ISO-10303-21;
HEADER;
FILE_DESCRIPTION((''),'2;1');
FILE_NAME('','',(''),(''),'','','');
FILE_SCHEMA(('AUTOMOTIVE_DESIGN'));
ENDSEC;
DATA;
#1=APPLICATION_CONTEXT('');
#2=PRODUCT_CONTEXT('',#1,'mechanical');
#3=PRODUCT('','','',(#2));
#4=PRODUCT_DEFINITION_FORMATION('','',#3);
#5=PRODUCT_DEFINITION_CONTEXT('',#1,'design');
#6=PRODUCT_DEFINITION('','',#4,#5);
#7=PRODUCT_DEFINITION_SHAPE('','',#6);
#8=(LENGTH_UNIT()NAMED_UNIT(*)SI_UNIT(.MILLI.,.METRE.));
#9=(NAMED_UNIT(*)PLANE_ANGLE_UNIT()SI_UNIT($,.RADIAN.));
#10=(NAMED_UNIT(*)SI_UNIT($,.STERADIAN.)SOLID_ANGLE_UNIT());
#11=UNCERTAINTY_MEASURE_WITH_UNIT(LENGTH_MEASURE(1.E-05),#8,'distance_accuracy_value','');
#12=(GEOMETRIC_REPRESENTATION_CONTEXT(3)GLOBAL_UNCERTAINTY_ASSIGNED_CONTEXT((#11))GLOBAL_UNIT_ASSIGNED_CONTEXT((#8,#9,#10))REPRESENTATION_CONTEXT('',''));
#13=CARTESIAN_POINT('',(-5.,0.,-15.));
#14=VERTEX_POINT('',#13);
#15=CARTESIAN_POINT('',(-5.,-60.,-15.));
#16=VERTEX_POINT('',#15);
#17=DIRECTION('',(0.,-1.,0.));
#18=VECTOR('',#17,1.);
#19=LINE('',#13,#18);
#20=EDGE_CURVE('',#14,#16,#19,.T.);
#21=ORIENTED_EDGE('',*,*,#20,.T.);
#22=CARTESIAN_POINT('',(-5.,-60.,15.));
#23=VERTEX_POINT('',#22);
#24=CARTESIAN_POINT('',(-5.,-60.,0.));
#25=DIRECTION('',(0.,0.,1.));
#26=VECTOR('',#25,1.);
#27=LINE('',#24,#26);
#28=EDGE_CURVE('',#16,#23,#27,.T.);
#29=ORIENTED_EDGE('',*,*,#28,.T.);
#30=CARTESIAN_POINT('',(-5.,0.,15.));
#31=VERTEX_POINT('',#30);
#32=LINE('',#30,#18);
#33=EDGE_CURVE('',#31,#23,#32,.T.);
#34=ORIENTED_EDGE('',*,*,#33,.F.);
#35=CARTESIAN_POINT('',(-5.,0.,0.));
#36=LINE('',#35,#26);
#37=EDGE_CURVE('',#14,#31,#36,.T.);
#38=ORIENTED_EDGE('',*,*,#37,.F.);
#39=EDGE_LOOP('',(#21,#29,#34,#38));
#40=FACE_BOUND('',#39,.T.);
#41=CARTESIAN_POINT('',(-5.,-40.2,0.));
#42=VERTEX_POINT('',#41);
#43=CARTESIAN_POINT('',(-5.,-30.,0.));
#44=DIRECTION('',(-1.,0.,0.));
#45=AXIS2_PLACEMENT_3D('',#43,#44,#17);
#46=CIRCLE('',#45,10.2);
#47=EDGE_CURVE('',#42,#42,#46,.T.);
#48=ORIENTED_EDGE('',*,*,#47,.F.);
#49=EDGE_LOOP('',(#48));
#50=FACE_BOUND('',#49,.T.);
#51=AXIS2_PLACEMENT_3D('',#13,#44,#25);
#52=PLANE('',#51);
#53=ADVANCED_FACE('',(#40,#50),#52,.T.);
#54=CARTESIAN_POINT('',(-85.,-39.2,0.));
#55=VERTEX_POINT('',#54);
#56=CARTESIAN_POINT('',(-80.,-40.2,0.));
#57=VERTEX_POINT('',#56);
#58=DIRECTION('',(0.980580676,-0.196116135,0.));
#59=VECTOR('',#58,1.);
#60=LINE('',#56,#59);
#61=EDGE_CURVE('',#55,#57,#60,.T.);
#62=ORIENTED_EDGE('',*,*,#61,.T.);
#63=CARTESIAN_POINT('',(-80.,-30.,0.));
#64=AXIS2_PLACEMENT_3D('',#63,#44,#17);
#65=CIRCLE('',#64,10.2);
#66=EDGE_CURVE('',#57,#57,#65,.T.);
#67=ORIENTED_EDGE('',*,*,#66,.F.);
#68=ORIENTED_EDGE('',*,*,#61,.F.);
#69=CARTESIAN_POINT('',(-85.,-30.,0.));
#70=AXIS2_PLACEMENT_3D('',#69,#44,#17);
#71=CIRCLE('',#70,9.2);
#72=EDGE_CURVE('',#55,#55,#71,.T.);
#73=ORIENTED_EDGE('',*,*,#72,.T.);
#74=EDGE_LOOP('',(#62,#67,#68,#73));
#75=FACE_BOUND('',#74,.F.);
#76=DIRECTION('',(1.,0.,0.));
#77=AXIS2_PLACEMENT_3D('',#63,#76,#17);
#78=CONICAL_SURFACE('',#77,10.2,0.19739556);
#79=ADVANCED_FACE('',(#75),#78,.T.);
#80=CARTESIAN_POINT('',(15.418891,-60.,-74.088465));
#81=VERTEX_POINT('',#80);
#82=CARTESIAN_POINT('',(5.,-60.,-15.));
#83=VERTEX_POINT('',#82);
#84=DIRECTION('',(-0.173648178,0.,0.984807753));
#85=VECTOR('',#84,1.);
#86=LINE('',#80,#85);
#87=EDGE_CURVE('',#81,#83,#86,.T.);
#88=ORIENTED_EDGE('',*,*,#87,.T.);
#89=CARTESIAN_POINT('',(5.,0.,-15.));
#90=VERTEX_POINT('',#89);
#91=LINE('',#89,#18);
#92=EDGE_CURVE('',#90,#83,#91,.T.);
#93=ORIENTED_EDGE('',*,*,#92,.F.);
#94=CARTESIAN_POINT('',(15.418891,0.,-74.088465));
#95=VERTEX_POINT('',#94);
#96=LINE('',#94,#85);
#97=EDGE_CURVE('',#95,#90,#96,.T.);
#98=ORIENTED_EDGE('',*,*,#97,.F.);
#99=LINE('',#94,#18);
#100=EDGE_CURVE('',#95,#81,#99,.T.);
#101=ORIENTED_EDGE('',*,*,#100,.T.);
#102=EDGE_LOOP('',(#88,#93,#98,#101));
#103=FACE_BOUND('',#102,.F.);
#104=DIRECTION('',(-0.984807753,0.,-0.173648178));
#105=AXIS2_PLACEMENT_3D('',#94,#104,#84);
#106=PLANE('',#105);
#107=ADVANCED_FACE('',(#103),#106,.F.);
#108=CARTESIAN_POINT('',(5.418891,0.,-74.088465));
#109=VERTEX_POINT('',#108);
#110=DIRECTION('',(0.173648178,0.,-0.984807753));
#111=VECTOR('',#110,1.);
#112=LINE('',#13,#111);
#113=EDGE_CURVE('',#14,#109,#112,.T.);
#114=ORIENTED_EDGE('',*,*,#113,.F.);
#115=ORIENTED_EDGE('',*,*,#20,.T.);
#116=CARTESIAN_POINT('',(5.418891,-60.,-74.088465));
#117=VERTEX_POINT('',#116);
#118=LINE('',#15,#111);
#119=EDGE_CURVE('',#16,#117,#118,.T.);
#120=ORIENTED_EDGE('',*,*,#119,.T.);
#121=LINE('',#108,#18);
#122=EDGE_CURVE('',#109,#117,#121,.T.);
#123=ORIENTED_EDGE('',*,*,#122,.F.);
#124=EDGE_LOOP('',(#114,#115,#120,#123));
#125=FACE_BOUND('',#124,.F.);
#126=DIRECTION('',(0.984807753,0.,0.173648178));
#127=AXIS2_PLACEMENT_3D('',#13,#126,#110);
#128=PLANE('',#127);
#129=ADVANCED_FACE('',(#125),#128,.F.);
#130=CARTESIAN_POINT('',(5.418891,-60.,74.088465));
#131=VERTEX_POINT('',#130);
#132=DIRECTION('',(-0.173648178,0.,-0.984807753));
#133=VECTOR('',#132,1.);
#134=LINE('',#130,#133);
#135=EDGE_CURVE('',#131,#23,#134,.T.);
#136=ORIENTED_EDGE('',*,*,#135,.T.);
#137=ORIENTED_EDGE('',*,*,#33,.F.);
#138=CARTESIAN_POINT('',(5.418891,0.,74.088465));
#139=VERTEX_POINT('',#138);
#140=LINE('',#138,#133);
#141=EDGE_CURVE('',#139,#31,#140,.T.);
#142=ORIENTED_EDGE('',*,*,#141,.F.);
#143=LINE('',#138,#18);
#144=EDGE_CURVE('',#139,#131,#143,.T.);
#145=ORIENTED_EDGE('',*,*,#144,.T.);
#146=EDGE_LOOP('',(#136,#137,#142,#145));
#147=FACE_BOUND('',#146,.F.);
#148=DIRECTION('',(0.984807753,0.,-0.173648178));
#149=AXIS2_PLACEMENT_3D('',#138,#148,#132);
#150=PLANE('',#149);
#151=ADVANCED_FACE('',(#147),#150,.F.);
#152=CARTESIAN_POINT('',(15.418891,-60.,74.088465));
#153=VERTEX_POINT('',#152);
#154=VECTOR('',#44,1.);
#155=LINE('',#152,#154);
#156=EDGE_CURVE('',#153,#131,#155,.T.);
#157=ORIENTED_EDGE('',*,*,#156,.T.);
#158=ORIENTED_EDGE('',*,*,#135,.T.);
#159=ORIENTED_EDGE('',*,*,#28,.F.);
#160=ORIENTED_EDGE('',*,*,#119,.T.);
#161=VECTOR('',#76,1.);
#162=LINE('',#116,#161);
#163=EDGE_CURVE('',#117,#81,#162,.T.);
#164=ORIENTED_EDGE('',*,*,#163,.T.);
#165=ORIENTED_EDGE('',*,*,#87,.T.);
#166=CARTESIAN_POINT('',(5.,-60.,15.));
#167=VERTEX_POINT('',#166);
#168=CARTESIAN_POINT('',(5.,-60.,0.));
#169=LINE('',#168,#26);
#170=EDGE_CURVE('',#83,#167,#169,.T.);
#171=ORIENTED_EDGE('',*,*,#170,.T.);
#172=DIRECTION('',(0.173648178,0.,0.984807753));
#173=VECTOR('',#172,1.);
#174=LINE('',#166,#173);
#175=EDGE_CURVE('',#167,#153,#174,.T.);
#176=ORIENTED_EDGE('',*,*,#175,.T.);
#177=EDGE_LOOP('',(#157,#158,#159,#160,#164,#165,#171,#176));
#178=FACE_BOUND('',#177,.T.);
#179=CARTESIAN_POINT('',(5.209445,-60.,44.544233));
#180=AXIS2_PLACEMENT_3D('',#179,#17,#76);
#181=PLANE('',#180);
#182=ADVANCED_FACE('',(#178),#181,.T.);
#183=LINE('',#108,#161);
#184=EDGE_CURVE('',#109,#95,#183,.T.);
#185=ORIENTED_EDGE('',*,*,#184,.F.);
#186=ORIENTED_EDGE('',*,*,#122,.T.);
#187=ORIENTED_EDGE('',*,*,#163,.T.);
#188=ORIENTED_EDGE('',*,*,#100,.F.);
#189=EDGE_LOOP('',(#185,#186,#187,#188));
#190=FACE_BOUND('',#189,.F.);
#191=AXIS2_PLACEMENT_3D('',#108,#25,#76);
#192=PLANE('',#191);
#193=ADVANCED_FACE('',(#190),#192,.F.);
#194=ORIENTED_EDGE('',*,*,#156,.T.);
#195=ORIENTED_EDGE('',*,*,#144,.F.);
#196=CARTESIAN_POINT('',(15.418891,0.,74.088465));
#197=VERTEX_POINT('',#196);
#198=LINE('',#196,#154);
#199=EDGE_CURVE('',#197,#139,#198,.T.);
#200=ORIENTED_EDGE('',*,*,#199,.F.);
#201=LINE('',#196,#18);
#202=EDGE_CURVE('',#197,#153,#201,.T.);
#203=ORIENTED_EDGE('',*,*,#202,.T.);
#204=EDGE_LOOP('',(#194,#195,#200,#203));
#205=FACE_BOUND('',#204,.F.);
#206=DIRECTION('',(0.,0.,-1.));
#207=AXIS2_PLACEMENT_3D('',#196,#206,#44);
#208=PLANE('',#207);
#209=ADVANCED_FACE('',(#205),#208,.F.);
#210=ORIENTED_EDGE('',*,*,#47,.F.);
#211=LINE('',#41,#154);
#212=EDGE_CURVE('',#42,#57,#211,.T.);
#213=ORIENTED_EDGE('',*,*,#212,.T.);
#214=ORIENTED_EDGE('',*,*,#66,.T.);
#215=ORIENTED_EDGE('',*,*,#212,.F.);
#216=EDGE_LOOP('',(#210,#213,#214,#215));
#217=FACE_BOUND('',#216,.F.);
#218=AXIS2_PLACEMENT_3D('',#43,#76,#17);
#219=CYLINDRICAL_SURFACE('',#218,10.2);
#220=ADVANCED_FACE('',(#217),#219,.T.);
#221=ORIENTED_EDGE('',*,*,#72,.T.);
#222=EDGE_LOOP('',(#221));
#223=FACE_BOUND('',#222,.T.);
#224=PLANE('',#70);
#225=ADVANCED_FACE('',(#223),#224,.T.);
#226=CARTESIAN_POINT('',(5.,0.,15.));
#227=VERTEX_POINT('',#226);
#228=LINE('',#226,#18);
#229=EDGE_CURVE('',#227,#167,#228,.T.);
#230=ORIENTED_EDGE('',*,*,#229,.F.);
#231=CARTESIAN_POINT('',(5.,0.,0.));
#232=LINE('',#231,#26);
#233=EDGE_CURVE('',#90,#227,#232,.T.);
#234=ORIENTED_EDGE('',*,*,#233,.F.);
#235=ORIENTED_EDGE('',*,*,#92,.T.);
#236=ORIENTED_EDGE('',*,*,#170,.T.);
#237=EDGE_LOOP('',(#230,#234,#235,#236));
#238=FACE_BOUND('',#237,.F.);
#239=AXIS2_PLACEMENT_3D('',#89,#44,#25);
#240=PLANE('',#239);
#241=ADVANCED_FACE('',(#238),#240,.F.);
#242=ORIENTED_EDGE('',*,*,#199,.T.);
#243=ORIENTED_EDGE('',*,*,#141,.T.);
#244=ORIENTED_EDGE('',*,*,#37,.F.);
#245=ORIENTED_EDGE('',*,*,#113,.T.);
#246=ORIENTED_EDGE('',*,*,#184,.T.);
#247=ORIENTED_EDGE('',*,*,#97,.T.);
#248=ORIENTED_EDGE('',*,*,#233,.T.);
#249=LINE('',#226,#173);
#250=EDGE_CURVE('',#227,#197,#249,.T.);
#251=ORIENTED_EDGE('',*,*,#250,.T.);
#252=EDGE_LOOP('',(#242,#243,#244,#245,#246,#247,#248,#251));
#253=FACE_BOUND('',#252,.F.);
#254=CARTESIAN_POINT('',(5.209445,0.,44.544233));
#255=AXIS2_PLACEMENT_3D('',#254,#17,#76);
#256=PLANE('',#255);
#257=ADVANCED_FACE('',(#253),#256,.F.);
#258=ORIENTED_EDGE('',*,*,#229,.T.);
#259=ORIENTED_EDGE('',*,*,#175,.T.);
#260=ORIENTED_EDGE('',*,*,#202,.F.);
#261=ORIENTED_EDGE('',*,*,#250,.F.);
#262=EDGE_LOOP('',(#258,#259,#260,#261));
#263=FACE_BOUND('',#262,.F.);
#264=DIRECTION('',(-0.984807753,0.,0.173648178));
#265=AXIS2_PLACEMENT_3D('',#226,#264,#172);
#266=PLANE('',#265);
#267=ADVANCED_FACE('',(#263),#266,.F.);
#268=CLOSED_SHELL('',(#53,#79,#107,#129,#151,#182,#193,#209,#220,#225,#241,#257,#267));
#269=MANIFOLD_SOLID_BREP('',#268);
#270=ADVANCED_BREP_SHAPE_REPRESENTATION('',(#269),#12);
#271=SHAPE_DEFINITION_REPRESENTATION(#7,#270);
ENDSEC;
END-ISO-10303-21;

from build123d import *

# Parameters (mm, degrees)
F0_W     = 10
F0_H     = 30
F1_DEPTH = 60
F2_R     = 10.2
F3_DEPTH = 80
F4_SIZE2 = 5
F4_SIZE  = 1


with BuildPart() as f1:
    # F0 (on Front) → F1 (new body)
    with BuildSketch(Plane.XZ):
        Polygon((5.41889066, 74.0884651807), (-5, 15), (5, 15), (15.41889066, 74.0884651807), align=None)
        Rectangle(F0_W, F0_H)
        Polygon((5, -15), (-5, -15), (5.41889066, -74.0884651807), (15.41889066, -74.0884651807), align=None)
    extrude(amount=F1_DEPTH)

    # F2 (on face) → F3 (join)
    with BuildSketch(Plane(origin=(-5, 0, 0), x_dir=(0, -1, 0), z_dir=(-1, 0, 0))):
        with Locations((30, 0)):
            Circle(F2_R)
    extrude(amount=F3_DEPTH)

    # F4
    f4_edges = [f1.edges().sort_by_distance(p)[0] for p in [
        (-85, -19.8, 0),
    ]]
    f4_side = f1.faces().sort_by_distance((-85, -30, 0))[0]
    chamfer(f4_edges, length=F4_SIZE, length2=F4_SIZE2, reference=f4_side)


solid = f1.part
